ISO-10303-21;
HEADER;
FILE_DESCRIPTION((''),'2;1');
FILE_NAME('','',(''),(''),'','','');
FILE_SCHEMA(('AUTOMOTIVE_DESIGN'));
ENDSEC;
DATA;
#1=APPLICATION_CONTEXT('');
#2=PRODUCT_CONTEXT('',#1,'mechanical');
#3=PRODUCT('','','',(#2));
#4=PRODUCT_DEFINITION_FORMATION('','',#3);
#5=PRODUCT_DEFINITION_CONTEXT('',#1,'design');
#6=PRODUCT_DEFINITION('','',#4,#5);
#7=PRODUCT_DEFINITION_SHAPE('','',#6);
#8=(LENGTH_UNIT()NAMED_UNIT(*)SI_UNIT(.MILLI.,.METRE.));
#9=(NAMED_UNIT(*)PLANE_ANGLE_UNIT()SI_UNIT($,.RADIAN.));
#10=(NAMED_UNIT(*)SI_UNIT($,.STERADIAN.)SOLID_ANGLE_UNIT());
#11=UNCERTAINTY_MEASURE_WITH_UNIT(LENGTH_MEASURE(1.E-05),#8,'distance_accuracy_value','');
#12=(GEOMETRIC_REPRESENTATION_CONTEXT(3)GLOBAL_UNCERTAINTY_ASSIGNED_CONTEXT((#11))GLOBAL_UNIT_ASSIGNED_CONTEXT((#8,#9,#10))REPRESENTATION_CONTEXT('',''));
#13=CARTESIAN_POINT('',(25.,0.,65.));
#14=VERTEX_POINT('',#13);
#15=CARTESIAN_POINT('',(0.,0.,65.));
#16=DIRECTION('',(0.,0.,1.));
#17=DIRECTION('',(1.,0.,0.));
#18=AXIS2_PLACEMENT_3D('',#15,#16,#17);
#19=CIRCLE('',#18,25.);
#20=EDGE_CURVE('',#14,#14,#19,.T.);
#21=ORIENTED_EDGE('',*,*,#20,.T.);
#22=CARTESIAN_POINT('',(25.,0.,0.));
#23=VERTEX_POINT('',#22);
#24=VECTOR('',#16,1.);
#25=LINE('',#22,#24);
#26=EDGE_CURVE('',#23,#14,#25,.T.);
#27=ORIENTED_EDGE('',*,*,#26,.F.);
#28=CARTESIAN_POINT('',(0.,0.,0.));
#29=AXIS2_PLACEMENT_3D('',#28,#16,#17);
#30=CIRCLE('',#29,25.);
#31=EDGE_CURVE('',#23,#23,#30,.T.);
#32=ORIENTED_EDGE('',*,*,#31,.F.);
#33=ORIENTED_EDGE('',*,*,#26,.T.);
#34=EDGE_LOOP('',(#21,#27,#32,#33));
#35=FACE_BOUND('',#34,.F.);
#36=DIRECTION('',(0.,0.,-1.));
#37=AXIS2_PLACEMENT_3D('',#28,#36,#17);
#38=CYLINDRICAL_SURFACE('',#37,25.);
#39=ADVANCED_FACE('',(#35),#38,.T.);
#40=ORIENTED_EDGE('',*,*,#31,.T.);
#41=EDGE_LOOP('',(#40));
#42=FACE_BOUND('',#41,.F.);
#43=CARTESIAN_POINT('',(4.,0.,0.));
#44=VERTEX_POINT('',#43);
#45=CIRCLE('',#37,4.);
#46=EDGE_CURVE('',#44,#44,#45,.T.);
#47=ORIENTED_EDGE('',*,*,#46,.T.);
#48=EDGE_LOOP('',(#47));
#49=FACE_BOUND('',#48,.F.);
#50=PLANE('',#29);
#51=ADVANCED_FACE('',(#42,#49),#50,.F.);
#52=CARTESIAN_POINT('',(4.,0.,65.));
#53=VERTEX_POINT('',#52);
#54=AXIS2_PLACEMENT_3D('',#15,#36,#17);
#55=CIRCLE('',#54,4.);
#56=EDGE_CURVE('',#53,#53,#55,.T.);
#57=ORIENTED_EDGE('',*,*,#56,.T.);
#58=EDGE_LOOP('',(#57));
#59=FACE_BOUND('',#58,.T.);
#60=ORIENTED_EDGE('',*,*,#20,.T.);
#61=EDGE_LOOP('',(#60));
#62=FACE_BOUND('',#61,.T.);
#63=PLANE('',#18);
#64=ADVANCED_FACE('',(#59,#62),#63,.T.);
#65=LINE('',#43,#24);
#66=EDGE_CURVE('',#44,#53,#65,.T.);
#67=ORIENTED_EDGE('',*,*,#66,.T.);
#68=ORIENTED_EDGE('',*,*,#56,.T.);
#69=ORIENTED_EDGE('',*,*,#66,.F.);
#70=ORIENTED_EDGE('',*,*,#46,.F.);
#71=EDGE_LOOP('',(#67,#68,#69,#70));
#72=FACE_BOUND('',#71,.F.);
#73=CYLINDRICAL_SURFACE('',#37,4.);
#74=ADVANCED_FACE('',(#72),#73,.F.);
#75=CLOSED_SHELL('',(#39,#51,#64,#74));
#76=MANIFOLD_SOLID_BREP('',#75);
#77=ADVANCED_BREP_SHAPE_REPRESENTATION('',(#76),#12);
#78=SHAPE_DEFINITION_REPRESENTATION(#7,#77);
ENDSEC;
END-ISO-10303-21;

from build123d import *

# Parameters (mm, degrees)
F0_R     = 25
F1_DEPTH = 65
F2_R     = 4
F3_DEPTH = 65.001


# Not quite as in the source:
# - a feature names something its author has since deleted; it is built from what else it names


with BuildPart() as f1:
    # F0 (on Top) → F1 (new body)
    with BuildSketch(Plane.XY):
        Circle(F0_R)
    extrude(amount=F1_DEPTH)

    # F2 (on face) → F3 (cut, through all)
    with BuildSketch(Plane(origin=(0, 0, 0), x_dir=(1, 0, 0), z_dir=(0, 0, -1))):
        Circle(F2_R)
    extrude(amount=-F3_DEPTH, mode=Mode.SUBTRACT)


solid = f1.part
